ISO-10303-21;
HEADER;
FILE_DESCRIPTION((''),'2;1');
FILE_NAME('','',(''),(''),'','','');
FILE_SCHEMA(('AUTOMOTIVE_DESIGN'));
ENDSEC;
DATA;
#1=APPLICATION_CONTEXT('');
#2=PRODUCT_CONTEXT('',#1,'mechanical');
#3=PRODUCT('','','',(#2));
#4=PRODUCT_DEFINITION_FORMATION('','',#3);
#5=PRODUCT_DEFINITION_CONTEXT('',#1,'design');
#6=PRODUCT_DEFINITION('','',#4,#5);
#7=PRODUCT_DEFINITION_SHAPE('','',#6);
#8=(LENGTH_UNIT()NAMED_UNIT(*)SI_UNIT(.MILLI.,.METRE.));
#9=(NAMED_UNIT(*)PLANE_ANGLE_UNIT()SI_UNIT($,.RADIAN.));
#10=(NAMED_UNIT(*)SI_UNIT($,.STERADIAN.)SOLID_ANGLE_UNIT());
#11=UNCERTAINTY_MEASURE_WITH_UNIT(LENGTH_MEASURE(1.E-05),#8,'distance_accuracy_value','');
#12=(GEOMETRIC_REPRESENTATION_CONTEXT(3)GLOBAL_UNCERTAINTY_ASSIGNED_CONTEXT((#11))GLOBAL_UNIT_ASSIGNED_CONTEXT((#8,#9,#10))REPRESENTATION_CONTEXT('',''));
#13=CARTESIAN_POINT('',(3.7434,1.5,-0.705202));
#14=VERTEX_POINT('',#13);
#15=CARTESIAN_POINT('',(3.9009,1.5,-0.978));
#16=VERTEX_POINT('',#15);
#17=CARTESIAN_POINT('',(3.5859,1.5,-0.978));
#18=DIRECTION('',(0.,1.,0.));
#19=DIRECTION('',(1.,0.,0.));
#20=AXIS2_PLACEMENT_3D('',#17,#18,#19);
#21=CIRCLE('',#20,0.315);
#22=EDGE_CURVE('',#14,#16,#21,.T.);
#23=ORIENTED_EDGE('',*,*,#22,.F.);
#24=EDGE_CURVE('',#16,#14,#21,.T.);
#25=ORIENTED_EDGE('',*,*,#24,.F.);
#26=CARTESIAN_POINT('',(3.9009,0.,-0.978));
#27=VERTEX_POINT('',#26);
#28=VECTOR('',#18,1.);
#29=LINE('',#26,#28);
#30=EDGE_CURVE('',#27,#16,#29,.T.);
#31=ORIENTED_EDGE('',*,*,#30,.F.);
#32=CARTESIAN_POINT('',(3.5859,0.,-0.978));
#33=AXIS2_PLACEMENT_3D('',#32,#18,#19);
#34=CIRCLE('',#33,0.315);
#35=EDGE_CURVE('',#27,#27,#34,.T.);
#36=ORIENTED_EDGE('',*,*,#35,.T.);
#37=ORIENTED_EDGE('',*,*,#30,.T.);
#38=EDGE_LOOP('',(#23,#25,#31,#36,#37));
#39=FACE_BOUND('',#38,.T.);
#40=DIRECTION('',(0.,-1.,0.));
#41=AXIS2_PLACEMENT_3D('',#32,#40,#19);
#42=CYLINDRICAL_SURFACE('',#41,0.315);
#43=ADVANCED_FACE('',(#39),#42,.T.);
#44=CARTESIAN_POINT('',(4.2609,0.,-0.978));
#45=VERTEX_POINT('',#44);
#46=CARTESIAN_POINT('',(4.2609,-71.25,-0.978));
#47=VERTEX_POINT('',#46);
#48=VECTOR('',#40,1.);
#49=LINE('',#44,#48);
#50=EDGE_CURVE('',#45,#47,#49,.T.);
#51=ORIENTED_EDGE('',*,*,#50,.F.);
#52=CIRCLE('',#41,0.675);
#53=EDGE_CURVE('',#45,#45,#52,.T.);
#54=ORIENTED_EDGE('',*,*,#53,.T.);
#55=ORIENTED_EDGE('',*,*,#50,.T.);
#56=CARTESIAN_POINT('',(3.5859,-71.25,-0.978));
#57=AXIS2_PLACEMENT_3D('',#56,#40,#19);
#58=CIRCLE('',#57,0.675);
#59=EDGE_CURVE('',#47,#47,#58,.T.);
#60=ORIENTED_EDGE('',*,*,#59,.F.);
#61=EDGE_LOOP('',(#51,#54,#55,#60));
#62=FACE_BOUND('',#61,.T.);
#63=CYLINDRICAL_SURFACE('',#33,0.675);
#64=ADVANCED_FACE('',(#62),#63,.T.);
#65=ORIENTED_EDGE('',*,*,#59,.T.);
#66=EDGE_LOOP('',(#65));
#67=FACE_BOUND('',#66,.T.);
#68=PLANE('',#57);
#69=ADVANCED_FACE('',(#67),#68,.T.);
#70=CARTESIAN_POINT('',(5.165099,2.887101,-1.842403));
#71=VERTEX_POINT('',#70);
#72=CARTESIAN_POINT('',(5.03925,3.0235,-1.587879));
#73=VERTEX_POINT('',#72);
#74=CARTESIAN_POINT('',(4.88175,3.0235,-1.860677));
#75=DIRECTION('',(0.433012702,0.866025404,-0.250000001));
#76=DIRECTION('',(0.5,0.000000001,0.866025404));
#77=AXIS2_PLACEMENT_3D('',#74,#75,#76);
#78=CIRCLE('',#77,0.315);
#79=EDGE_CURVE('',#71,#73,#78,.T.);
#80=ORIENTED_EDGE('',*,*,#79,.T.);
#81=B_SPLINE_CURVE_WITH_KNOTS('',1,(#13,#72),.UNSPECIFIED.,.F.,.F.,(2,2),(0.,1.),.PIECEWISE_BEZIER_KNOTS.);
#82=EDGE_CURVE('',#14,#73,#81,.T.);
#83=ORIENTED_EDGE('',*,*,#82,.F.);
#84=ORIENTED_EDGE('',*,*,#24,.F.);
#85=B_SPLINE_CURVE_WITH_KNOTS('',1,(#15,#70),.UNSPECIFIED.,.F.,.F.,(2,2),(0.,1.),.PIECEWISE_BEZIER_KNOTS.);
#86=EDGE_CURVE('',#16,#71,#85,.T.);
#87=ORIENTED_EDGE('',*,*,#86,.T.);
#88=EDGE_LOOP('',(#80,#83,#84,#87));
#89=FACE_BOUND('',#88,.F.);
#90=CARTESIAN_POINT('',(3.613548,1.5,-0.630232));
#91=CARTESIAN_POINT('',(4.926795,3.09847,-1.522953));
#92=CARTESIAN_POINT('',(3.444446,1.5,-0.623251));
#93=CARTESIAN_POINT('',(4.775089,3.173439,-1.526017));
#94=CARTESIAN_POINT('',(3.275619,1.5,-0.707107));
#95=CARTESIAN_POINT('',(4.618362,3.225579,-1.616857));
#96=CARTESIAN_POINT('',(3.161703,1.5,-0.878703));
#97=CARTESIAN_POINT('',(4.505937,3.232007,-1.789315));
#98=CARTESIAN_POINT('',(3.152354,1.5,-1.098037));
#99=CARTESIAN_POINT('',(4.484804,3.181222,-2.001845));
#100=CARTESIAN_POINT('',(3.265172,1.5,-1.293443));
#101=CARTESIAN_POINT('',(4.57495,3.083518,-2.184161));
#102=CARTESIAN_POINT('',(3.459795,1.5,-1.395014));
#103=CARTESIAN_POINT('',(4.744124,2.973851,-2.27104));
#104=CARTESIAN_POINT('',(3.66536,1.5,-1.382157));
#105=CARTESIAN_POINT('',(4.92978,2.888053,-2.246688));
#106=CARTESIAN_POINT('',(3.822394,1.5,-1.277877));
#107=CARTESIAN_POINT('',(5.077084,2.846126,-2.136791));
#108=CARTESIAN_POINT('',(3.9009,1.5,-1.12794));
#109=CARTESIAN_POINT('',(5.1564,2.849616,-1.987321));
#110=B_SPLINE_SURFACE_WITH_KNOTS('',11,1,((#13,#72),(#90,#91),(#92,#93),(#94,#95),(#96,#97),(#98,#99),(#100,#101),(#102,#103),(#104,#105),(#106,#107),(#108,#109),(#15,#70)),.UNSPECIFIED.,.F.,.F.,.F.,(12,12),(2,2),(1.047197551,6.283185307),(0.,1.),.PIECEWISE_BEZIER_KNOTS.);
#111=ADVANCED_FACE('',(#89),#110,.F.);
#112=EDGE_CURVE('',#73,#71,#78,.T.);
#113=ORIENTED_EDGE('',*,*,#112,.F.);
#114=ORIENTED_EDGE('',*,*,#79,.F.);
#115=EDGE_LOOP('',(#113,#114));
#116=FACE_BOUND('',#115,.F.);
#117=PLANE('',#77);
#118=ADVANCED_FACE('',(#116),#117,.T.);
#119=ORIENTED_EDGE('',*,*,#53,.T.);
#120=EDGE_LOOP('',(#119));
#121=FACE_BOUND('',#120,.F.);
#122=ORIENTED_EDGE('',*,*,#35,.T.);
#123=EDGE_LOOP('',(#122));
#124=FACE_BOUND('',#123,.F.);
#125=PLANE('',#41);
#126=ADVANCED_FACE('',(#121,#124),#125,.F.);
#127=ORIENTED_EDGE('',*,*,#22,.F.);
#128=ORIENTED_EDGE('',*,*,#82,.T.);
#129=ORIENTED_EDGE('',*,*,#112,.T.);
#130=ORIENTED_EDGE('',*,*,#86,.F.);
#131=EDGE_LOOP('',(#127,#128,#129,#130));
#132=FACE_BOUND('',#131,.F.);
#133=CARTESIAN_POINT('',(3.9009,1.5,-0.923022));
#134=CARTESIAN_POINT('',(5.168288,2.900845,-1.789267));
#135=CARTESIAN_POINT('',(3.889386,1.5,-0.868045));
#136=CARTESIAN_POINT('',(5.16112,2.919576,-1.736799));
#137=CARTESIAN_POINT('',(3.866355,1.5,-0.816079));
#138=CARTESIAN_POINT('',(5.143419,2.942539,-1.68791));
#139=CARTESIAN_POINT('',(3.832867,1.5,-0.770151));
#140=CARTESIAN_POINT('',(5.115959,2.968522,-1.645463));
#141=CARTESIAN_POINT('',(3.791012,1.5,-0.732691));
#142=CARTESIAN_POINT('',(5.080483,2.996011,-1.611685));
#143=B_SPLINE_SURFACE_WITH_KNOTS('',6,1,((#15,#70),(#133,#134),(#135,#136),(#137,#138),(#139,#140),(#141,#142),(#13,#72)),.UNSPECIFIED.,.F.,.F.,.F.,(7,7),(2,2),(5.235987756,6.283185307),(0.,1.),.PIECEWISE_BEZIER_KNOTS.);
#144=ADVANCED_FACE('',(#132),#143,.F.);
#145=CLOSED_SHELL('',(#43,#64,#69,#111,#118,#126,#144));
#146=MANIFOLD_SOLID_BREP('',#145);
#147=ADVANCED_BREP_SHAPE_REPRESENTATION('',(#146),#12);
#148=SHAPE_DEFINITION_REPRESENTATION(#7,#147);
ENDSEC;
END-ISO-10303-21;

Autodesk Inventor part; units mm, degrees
ref_plane "YZ Plane" through (0, 0, 0) normal (1, 0, 0) x (0, 1, 0)
ref_plane "XZ Plane" through (0, 0, 0) normal (0, 1, 0) x (-1, 0, 0)
ref_plane "XY Plane" through (0, 0, 0) normal (0, 0, 1) x (1, 0, 0)
ref_plane "Work Plane2" through (3.5859, 0, -0.978) normal (0, -1, 0) x (1, 0, 0)
sketch "Sketch2" plane through (3.5859, 0, -0.978) normal (0, -1, 0) x (1, 0, 0)
  circle A0 centre (0, 0) radius 0.675
  point P0 (-3.5859, 0.978)
  dimension "d3" = 1.35
extrude "Extrusion2" add sketch "Sketch2" along normal blind 71.25
ref_plane "Work Plane1" through (3.5859, 3, -0.978) normal (0, 1, 0) x (1, 0, 0)
sketch "Sketch3" plane through (3.5859, 0, -0.978) normal (0, 1, 0) x (1, 0, 0)
  circle A0 centre (0, 0) radius 0.315
  point P0 (-3.5859, -0.978)
  dimension "d7" = 0.63
extrude "Extrusion3" add sketch "Sketch3" along normal blind 1.5
ref_plane "Work Plane3" through (5.9115, 2.4915, -1.92) normal (0.4330127, 0.8660254, -0.25) x (0.5, 0, 0.8660254)
sketch "Sketch5" plane through (5.9115, 2.4915, -1.92) normal (0.4330127, 0.8660254, -0.25) x (0.5, 0, 0.8660254)
  circle A0 centre (-0.4635, -1.064) radius 0.315
  point P0 (-1.293, -4.0192)
  dimension "d11" = 0.63
loft "Loft1" add profiles "Sketch5" section 1 edges at (3.2709, 1.5, -0.978)
properties part number "redWire"
